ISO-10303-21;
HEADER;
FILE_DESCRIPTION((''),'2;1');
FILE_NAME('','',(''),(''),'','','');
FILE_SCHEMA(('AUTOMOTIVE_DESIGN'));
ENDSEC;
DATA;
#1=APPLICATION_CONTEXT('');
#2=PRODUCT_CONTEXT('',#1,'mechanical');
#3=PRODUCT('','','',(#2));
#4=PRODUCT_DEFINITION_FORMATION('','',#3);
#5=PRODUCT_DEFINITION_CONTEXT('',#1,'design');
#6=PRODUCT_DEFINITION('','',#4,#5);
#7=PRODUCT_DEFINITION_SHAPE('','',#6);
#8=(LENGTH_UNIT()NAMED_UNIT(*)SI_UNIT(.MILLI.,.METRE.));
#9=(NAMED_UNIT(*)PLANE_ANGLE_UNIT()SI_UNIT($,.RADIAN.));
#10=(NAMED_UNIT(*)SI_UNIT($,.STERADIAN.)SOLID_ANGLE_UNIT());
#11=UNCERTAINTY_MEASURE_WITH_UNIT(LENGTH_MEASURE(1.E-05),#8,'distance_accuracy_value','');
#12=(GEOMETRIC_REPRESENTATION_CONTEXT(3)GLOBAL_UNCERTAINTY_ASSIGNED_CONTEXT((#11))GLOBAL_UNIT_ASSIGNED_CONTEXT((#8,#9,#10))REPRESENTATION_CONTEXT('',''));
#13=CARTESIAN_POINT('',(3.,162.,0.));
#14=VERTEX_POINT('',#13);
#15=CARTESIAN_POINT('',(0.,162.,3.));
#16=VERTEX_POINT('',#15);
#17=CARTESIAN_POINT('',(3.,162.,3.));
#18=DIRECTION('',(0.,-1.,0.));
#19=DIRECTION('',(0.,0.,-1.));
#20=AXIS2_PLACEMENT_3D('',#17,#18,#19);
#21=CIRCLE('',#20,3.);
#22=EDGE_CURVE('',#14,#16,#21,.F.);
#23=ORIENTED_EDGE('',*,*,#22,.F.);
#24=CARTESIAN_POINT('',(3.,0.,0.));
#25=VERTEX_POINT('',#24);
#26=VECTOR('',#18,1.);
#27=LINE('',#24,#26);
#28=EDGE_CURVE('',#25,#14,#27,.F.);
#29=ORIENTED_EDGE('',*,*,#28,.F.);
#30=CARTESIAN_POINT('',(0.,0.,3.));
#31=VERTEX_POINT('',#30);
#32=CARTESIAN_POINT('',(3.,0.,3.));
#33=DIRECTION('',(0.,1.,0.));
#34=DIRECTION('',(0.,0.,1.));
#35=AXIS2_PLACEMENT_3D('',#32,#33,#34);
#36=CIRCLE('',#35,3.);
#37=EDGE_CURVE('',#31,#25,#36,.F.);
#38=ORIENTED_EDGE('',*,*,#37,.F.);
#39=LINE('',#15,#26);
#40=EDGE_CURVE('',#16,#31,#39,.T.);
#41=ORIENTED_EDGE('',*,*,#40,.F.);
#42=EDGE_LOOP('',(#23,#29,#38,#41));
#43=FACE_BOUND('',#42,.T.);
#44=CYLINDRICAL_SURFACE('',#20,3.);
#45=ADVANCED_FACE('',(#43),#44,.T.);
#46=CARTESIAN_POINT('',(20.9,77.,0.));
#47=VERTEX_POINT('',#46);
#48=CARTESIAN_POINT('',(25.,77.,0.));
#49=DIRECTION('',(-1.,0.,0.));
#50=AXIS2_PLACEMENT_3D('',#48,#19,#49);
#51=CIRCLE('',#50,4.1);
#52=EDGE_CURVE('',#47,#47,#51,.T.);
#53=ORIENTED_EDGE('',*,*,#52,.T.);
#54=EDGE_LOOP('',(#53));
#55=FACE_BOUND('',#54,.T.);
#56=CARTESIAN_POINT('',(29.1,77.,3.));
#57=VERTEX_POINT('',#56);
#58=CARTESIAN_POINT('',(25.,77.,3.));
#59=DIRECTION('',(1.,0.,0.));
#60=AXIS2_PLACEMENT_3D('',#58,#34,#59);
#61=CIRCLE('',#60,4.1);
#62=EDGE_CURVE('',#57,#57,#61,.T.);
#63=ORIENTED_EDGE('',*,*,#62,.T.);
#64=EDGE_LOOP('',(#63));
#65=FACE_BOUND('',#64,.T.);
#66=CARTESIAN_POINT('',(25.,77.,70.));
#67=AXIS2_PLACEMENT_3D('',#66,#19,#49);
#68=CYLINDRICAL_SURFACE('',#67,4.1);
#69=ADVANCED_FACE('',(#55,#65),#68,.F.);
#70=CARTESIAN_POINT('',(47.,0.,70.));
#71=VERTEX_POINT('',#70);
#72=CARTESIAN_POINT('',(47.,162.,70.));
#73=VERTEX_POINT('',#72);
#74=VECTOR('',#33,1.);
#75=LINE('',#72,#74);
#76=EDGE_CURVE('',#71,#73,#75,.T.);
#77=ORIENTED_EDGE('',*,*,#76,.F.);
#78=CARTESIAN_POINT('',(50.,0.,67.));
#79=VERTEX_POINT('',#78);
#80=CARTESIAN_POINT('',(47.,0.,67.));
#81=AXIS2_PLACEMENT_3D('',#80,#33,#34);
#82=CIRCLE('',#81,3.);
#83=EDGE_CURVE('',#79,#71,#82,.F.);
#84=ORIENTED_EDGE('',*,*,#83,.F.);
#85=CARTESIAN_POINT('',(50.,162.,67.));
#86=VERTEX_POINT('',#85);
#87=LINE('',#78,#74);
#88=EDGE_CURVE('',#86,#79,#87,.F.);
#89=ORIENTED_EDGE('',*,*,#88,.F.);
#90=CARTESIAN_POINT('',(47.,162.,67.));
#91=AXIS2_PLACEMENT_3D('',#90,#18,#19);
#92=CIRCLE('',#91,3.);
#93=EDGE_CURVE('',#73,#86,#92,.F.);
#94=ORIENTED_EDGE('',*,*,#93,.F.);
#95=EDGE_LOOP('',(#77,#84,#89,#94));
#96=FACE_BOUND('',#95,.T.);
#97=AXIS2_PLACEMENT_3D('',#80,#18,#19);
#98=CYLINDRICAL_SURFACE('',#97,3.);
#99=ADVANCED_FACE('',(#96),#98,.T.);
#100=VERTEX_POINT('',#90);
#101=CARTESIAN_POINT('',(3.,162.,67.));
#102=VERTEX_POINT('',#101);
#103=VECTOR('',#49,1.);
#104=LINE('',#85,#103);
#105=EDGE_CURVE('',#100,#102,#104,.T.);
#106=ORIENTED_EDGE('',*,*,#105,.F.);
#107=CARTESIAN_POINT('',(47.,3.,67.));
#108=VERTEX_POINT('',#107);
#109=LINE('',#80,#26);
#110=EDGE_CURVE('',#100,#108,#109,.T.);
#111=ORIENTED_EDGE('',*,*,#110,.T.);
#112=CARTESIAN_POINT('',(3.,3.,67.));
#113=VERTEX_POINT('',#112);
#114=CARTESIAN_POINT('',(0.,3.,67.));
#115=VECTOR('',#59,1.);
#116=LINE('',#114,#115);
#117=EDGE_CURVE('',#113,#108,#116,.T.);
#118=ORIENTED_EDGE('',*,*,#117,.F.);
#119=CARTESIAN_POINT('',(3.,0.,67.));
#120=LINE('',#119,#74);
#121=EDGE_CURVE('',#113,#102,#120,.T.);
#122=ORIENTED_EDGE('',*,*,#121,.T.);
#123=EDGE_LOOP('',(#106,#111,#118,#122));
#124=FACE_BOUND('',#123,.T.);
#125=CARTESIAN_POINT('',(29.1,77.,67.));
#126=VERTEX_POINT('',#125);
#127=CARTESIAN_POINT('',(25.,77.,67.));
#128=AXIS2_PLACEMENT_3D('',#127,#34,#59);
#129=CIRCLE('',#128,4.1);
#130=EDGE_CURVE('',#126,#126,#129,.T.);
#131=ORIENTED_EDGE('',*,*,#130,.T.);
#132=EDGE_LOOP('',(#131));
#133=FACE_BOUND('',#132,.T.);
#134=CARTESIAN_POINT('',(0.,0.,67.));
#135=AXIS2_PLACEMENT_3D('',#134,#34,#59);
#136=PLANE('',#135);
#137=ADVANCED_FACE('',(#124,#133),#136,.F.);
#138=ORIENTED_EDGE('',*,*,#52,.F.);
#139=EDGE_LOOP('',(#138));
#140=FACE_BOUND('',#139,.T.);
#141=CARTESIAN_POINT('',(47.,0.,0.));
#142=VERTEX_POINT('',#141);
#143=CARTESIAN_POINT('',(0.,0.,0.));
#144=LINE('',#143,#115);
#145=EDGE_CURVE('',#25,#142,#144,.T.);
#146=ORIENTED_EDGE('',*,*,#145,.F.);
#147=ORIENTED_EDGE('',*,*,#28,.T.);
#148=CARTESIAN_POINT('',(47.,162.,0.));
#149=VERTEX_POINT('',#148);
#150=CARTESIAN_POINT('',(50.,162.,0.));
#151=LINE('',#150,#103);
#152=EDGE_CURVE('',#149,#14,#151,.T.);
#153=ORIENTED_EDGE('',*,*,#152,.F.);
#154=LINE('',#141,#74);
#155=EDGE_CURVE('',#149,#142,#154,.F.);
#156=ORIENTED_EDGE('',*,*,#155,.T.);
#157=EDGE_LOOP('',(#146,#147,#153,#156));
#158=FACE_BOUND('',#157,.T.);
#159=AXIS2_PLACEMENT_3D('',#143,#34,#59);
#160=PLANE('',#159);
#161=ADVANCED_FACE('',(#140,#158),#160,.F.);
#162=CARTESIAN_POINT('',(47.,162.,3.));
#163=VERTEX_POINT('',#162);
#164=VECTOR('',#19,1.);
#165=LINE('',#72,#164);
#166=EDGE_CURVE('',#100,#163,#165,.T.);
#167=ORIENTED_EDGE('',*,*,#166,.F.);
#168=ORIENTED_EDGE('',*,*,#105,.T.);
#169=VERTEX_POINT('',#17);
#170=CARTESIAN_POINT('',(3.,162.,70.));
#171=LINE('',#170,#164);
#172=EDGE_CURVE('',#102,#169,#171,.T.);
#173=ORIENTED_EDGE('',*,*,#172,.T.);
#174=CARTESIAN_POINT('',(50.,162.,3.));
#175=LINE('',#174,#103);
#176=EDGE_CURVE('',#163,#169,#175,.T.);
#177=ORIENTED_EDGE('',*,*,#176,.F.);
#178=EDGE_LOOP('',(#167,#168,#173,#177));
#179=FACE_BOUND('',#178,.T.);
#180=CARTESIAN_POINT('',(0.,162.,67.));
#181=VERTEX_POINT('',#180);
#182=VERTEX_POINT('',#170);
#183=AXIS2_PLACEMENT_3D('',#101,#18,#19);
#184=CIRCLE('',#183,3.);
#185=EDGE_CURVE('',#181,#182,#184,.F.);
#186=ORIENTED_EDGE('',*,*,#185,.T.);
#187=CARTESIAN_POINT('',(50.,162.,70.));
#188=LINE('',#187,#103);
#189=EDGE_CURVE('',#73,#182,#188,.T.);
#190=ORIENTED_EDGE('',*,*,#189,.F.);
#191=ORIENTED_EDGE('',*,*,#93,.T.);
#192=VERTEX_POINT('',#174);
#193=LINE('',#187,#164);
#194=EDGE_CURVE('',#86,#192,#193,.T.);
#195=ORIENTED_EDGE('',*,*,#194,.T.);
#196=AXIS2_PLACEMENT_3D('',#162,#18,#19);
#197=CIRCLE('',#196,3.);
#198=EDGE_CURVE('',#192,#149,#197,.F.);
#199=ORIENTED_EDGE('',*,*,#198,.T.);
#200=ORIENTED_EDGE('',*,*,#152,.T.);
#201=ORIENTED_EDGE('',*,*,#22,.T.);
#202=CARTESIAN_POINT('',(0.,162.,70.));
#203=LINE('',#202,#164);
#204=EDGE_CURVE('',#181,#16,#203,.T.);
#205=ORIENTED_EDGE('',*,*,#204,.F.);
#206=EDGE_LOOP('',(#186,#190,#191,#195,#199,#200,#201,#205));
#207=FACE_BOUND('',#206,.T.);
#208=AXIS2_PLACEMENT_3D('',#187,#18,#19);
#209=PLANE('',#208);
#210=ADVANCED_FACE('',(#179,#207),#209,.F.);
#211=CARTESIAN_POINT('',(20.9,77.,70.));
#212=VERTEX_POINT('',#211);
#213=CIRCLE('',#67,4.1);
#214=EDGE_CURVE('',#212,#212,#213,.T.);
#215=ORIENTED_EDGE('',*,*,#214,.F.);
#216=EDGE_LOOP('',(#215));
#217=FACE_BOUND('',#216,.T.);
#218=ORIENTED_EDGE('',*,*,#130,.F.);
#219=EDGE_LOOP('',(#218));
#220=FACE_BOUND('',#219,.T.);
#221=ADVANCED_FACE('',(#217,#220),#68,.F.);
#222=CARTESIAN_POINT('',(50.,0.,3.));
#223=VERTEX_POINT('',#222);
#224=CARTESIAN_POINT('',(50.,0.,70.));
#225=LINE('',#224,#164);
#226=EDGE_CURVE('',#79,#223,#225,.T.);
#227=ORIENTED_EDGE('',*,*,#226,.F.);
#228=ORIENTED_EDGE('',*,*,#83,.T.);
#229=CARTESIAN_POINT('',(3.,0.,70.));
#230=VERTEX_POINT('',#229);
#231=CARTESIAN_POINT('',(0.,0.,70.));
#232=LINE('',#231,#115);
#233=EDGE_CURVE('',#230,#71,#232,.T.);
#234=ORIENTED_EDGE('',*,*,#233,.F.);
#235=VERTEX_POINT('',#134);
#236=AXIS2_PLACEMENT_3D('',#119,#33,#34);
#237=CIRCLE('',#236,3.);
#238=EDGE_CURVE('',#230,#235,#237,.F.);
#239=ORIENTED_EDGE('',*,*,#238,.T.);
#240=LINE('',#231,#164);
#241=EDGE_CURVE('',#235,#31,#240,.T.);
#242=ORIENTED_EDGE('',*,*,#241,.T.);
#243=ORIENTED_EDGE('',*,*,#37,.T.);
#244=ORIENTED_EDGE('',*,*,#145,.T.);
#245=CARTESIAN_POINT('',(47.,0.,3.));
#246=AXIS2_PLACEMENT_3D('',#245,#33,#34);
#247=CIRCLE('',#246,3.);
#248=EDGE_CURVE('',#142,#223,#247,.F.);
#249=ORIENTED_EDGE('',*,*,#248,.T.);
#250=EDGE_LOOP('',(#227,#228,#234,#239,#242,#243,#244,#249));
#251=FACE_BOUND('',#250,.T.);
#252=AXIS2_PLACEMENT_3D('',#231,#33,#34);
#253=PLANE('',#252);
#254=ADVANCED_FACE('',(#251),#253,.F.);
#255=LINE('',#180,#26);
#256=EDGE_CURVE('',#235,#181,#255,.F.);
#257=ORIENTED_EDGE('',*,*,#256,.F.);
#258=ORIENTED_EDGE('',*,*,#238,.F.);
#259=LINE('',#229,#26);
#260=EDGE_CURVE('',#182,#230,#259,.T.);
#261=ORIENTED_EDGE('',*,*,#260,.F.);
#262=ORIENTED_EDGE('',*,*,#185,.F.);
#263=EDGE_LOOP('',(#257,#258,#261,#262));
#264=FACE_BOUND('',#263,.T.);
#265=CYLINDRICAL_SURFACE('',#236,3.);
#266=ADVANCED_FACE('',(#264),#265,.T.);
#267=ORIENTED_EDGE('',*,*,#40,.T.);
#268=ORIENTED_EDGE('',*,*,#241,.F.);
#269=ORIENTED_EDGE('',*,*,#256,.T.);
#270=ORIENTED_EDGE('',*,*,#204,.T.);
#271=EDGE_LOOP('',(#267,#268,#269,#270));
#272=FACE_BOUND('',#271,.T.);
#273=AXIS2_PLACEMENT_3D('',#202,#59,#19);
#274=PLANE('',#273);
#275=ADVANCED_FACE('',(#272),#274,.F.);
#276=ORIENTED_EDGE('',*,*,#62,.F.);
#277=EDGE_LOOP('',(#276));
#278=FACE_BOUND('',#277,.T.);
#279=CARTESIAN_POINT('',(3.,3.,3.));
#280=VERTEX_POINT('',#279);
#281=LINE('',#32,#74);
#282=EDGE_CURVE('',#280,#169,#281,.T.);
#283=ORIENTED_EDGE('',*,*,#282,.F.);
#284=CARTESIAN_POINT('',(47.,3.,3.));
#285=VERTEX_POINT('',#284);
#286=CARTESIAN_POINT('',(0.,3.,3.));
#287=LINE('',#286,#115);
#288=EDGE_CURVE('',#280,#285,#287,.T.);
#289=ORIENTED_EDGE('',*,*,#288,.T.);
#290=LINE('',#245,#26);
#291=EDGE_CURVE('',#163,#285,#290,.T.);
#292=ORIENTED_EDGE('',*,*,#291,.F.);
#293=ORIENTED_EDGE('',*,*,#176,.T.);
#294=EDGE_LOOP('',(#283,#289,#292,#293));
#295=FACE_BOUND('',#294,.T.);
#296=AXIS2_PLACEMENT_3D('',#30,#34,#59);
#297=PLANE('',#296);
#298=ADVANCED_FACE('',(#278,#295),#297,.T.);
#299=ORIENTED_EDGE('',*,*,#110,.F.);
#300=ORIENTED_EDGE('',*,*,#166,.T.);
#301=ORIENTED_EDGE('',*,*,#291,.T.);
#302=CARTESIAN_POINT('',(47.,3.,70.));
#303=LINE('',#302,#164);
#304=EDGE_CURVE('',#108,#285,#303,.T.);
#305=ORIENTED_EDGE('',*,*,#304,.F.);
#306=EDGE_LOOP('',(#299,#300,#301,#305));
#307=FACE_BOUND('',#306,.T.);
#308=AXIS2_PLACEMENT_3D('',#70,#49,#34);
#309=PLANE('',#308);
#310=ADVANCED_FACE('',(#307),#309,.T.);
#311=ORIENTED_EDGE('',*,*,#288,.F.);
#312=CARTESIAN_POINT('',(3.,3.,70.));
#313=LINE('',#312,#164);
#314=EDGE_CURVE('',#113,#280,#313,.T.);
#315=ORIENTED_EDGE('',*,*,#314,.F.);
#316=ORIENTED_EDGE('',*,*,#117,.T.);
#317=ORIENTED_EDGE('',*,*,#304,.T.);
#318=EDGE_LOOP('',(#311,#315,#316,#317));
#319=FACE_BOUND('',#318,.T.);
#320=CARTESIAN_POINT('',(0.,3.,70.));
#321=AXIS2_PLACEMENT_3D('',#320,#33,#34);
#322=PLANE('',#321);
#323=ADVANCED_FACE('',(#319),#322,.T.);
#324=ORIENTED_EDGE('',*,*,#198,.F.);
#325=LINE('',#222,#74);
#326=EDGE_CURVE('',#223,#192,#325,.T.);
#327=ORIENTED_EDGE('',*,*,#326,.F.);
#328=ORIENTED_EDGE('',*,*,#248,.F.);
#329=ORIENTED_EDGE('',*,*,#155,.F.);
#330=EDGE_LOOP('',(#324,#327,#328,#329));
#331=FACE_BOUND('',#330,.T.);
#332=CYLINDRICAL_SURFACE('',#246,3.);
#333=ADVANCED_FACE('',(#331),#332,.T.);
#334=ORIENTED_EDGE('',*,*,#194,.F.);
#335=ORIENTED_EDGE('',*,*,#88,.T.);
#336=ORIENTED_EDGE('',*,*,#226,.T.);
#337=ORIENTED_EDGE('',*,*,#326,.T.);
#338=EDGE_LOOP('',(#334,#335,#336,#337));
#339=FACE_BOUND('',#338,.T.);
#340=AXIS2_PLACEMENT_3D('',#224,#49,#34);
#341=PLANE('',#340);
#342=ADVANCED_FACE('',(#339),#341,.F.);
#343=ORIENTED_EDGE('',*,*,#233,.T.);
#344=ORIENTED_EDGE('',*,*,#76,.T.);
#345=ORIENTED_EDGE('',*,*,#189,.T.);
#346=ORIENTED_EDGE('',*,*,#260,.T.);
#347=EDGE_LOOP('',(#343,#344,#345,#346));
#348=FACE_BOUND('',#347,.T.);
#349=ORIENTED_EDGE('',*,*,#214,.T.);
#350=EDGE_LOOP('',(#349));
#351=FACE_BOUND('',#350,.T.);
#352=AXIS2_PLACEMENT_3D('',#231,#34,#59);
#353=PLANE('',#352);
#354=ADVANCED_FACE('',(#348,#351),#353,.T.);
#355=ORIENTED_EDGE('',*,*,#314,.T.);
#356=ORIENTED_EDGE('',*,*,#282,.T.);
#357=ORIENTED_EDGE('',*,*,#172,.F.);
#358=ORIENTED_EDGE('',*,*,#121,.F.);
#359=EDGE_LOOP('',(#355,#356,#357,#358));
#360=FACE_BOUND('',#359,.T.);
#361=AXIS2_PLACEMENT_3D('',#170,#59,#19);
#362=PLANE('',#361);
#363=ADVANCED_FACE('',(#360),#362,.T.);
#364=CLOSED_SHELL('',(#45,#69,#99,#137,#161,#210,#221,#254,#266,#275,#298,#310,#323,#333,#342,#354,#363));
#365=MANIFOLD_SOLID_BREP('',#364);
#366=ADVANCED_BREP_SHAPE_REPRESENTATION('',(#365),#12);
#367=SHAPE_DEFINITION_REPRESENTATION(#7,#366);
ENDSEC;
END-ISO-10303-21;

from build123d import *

# Parameters (mm, degrees)
SKETCH_1_W         = 50
SKETCH_1_H         = 162
BLOCKEXTRUDE_DEPTH = 70
FILLET_2_R         = 3
SHELL_START        = 3
SHELL_1_OUTLINE_W  = 159
SHELL_1_OUTLINE_H  = 64
SHELL_1_DEPTH      = 44
SKETCH_2_R         = 4.1
CABLE_ENTRY_DEPTH  = 184.423008371


# Read off the part's stored shape, not the designer's step: 抽壳1
with BuildPart() as part:
    # 草图1 → BlockExtrude (new body)
    with BuildSketch(Plane.XY):
        with Locations((25, 81)):
            Rectangle(SKETCH_1_W, SKETCH_1_H)
    extrude(amount=BLOCKEXTRUDE_DEPTH)

    # Fillet 2
    fillet_2_edges = [part.edges().sort_by_distance(p)[0] for p in [
        (50, 81, 70),
        (0, 81, 70),
        (50, 81, 0),
        (0, 81, 0),
    ]]
    fillet(fillet_2_edges, radius=FILLET_2_R)

    # 抽壳1 outline → 抽壳1 (cut)
    with BuildSketch(Plane.YZ.offset(SHELL_START)):
        with Locations((82.5, 35)):
            Rectangle(SHELL_1_OUTLINE_W, SHELL_1_OUTLINE_H)
    extrude(amount=SHELL_1_DEPTH, mode=Mode.SUBTRACT)

    # 草图2 → Cable_entry (cut, through all)
    with BuildSketch(Plane(origin=(0, 0, 0), x_dir=(-1, 0, 0), z_dir=(0, 0, -1))):
        with Locations((-25, 77)):
            Circle(SKETCH_2_R)
    extrude(amount=-CABLE_ENTRY_DEPTH, mode=Mode.SUBTRACT)


solid = part.part
